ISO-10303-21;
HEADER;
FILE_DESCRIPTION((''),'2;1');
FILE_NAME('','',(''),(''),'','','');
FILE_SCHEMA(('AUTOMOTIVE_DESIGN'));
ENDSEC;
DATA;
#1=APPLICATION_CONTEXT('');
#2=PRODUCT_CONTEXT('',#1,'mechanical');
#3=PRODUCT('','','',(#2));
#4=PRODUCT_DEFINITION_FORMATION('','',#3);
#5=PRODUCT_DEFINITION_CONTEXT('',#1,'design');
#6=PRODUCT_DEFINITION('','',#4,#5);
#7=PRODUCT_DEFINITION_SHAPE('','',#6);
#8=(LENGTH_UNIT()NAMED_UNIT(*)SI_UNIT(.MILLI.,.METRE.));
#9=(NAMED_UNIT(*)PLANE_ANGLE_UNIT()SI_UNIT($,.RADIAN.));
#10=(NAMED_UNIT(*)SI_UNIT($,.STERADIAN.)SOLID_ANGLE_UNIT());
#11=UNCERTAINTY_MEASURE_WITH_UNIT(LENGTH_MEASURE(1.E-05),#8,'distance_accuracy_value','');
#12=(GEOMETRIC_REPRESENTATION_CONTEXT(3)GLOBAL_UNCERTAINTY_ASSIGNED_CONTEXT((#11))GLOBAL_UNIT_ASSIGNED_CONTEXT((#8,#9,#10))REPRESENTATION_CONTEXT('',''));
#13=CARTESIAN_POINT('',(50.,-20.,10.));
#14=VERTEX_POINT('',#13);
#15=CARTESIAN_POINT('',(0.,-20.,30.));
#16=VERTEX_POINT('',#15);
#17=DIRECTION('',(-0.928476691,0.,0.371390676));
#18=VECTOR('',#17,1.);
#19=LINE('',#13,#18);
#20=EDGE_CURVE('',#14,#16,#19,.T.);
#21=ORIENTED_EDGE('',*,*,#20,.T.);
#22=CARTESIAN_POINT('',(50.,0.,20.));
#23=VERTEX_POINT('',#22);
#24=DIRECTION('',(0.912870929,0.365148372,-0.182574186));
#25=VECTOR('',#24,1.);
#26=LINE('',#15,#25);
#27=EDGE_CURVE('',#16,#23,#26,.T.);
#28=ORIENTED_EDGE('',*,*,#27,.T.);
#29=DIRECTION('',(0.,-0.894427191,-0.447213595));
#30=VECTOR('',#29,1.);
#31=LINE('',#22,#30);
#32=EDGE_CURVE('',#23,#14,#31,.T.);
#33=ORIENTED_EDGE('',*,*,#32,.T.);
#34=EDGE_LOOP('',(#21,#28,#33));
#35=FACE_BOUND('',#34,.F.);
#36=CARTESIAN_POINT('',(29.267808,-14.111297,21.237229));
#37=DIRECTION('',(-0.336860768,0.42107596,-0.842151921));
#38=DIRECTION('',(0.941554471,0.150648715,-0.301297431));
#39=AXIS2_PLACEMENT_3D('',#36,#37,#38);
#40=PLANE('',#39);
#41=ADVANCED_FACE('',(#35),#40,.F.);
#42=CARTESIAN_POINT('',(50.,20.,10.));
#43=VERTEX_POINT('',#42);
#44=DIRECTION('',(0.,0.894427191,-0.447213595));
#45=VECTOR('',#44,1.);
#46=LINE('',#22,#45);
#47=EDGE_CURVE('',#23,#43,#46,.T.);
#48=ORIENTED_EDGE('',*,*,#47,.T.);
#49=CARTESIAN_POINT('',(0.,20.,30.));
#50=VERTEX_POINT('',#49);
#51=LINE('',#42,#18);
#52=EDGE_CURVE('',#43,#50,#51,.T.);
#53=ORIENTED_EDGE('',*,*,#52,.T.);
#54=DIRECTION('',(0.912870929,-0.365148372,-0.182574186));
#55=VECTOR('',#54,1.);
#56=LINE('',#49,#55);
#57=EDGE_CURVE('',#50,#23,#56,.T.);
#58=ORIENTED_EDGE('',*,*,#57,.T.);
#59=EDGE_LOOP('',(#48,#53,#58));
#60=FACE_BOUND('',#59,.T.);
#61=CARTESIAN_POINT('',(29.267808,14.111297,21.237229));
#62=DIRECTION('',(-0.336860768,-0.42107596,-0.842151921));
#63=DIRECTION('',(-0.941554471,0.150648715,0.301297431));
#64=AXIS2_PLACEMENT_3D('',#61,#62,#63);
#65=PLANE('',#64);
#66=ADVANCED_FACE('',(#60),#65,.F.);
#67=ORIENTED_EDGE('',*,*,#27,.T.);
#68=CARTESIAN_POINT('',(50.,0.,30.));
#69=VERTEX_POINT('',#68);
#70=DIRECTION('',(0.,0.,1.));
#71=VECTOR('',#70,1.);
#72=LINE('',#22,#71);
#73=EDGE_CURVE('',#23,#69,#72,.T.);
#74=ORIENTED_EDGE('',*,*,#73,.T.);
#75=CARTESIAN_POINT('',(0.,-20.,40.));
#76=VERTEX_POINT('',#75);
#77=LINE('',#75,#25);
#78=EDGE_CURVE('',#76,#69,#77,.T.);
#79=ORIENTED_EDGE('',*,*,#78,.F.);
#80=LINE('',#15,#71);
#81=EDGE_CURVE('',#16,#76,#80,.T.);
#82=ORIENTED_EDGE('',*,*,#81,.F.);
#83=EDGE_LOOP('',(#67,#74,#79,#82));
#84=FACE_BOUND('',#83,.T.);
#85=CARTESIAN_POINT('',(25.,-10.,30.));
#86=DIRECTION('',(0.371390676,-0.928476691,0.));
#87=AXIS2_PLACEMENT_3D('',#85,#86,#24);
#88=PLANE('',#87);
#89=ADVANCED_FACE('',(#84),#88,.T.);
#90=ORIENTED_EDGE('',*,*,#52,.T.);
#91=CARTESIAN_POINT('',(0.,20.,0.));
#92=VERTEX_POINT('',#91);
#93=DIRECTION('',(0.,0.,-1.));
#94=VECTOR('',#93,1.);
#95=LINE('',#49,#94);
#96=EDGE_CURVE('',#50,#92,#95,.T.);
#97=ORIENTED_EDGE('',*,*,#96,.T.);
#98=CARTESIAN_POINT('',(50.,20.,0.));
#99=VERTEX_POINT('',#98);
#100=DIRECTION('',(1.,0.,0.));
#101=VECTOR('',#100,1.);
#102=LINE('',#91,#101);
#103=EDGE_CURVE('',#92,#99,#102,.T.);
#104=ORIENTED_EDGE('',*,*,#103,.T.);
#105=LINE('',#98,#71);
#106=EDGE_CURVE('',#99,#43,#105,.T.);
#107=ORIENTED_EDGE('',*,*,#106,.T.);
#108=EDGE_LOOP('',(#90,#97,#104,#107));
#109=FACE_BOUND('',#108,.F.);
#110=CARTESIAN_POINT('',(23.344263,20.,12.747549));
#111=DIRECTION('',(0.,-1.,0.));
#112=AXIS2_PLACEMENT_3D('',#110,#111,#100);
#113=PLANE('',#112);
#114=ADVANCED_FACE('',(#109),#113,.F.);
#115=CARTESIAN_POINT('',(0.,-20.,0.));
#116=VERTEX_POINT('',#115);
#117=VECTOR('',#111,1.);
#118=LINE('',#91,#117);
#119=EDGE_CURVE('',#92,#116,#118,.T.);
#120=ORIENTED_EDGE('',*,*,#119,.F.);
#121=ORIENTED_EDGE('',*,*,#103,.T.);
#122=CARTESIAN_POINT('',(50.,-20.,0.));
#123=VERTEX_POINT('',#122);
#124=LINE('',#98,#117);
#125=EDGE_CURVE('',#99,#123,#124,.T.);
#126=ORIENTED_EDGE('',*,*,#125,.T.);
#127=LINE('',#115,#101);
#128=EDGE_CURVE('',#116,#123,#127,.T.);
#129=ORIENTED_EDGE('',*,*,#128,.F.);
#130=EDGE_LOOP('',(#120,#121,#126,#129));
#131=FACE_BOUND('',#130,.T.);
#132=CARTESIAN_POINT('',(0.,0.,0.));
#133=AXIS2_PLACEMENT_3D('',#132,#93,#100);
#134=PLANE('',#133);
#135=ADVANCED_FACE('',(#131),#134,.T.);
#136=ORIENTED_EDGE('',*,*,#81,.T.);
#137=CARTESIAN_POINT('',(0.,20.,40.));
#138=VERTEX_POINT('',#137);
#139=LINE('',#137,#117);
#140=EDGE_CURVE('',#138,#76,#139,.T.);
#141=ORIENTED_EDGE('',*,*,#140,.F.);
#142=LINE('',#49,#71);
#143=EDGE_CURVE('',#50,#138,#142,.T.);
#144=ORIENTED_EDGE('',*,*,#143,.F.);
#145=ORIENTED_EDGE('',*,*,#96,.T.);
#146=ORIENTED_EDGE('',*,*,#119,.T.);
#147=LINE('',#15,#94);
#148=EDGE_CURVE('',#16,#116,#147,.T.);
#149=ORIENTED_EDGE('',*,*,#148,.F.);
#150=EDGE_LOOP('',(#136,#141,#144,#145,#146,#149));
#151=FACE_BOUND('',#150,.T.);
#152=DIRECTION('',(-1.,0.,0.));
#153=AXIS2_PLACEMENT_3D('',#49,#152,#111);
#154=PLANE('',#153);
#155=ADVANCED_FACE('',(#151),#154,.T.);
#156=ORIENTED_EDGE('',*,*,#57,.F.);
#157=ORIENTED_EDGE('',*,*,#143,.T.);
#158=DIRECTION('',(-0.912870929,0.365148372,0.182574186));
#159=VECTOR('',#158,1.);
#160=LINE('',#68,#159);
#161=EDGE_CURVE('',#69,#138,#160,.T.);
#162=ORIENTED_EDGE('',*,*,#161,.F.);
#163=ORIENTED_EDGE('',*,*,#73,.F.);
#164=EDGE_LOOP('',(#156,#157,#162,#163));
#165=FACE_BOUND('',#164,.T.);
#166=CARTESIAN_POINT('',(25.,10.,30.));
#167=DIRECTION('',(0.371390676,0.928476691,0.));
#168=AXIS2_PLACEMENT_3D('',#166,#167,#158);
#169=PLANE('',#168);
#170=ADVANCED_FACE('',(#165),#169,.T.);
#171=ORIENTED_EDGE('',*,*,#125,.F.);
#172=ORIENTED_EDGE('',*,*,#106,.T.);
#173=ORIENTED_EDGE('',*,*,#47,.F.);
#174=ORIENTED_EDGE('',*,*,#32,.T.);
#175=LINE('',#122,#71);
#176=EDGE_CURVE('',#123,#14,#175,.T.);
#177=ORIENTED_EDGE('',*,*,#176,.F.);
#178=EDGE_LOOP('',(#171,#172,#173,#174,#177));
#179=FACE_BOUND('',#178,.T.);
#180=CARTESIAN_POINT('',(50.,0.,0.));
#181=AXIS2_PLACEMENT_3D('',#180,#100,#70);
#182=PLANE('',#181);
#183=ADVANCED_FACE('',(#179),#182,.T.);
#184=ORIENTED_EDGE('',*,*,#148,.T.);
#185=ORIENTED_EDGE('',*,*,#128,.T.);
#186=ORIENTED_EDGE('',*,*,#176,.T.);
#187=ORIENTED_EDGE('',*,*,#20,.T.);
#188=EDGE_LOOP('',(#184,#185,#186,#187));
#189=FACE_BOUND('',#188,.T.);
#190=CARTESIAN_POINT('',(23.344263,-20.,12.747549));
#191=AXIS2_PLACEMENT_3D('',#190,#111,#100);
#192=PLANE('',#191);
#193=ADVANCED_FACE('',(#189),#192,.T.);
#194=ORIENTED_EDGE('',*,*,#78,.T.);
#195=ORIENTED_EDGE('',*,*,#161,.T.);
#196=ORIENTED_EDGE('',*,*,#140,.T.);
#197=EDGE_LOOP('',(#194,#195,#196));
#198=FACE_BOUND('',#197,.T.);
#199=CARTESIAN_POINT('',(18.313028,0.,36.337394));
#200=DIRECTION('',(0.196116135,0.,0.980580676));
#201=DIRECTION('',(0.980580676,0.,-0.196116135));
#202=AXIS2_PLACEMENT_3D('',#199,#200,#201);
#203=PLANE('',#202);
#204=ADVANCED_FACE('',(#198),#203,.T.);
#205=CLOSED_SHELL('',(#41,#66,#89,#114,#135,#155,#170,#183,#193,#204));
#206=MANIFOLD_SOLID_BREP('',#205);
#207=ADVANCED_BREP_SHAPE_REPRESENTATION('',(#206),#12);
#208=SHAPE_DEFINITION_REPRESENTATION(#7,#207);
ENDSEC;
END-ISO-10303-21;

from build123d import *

# Parameters (mm, degrees)
F1_DEPTH = 20
F6_DEPTH = 16.8440384213


# Not quite as in the source:
# - a pattern or mirror of a feature is missing from the dataset's text; its kind, count and spacing are read off the source's solid
# - a feature names something its author has since deleted; it is built from what else it names


with BuildPart() as f1:
    # F0 (on Front) → F1 (new body, symmetric)
    with BuildSketch(Plane.XZ):
        Polygon((0, 30), (0, 0), (50, 0), (50, 20), align=None)
    extrude(amount=F1_DEPTH, both=True)

    # F5 (on 3pt) → F6 (cut, through all)
    with BuildSketch(Plane(origin=(11.3475177305, -14.1843971631, 28.3687943262), x_dir=(0.9415544714, 0.1506487154, -0.3012974309), z_dir=(-0.3368607684, 0.4210759605, -0.8421519211))):
        Polygon((41.0517749549, 13.416407865), (-12.0518972345, 4.472135955), (41.0517749549, -8.94427191), align=None)
    f6 = extrude(amount=-F6_DEPTH, mode=Mode.SUBTRACT)

    # F6_copies: F6 across plane
    add(f6.mirror(Plane.ZX), mode=Mode.SUBTRACT)

    # F8: sweep along a path in F7
    with BuildLine(Plane(origin=(0, 0, 0), x_dir=(0, -1, 0), z_dir=(-1, 0, 0))) as f8_path:
        Line((20, 30), (20, 40))
    # F1_face1 (on face) → F8 (sweep)
    with BuildSketch(Plane(origin=(16.6666666667, 0, 26.6666666667), x_dir=(1, 0, 0), z_dir=(0.1961161351, 0, 0.9805806757))):
        Polygon((-16.996731712, -20), (33.993463424, 0), (-16.996731712, 20), align=None)
    sweep(path=f8_path.line)


solid = f1.part
